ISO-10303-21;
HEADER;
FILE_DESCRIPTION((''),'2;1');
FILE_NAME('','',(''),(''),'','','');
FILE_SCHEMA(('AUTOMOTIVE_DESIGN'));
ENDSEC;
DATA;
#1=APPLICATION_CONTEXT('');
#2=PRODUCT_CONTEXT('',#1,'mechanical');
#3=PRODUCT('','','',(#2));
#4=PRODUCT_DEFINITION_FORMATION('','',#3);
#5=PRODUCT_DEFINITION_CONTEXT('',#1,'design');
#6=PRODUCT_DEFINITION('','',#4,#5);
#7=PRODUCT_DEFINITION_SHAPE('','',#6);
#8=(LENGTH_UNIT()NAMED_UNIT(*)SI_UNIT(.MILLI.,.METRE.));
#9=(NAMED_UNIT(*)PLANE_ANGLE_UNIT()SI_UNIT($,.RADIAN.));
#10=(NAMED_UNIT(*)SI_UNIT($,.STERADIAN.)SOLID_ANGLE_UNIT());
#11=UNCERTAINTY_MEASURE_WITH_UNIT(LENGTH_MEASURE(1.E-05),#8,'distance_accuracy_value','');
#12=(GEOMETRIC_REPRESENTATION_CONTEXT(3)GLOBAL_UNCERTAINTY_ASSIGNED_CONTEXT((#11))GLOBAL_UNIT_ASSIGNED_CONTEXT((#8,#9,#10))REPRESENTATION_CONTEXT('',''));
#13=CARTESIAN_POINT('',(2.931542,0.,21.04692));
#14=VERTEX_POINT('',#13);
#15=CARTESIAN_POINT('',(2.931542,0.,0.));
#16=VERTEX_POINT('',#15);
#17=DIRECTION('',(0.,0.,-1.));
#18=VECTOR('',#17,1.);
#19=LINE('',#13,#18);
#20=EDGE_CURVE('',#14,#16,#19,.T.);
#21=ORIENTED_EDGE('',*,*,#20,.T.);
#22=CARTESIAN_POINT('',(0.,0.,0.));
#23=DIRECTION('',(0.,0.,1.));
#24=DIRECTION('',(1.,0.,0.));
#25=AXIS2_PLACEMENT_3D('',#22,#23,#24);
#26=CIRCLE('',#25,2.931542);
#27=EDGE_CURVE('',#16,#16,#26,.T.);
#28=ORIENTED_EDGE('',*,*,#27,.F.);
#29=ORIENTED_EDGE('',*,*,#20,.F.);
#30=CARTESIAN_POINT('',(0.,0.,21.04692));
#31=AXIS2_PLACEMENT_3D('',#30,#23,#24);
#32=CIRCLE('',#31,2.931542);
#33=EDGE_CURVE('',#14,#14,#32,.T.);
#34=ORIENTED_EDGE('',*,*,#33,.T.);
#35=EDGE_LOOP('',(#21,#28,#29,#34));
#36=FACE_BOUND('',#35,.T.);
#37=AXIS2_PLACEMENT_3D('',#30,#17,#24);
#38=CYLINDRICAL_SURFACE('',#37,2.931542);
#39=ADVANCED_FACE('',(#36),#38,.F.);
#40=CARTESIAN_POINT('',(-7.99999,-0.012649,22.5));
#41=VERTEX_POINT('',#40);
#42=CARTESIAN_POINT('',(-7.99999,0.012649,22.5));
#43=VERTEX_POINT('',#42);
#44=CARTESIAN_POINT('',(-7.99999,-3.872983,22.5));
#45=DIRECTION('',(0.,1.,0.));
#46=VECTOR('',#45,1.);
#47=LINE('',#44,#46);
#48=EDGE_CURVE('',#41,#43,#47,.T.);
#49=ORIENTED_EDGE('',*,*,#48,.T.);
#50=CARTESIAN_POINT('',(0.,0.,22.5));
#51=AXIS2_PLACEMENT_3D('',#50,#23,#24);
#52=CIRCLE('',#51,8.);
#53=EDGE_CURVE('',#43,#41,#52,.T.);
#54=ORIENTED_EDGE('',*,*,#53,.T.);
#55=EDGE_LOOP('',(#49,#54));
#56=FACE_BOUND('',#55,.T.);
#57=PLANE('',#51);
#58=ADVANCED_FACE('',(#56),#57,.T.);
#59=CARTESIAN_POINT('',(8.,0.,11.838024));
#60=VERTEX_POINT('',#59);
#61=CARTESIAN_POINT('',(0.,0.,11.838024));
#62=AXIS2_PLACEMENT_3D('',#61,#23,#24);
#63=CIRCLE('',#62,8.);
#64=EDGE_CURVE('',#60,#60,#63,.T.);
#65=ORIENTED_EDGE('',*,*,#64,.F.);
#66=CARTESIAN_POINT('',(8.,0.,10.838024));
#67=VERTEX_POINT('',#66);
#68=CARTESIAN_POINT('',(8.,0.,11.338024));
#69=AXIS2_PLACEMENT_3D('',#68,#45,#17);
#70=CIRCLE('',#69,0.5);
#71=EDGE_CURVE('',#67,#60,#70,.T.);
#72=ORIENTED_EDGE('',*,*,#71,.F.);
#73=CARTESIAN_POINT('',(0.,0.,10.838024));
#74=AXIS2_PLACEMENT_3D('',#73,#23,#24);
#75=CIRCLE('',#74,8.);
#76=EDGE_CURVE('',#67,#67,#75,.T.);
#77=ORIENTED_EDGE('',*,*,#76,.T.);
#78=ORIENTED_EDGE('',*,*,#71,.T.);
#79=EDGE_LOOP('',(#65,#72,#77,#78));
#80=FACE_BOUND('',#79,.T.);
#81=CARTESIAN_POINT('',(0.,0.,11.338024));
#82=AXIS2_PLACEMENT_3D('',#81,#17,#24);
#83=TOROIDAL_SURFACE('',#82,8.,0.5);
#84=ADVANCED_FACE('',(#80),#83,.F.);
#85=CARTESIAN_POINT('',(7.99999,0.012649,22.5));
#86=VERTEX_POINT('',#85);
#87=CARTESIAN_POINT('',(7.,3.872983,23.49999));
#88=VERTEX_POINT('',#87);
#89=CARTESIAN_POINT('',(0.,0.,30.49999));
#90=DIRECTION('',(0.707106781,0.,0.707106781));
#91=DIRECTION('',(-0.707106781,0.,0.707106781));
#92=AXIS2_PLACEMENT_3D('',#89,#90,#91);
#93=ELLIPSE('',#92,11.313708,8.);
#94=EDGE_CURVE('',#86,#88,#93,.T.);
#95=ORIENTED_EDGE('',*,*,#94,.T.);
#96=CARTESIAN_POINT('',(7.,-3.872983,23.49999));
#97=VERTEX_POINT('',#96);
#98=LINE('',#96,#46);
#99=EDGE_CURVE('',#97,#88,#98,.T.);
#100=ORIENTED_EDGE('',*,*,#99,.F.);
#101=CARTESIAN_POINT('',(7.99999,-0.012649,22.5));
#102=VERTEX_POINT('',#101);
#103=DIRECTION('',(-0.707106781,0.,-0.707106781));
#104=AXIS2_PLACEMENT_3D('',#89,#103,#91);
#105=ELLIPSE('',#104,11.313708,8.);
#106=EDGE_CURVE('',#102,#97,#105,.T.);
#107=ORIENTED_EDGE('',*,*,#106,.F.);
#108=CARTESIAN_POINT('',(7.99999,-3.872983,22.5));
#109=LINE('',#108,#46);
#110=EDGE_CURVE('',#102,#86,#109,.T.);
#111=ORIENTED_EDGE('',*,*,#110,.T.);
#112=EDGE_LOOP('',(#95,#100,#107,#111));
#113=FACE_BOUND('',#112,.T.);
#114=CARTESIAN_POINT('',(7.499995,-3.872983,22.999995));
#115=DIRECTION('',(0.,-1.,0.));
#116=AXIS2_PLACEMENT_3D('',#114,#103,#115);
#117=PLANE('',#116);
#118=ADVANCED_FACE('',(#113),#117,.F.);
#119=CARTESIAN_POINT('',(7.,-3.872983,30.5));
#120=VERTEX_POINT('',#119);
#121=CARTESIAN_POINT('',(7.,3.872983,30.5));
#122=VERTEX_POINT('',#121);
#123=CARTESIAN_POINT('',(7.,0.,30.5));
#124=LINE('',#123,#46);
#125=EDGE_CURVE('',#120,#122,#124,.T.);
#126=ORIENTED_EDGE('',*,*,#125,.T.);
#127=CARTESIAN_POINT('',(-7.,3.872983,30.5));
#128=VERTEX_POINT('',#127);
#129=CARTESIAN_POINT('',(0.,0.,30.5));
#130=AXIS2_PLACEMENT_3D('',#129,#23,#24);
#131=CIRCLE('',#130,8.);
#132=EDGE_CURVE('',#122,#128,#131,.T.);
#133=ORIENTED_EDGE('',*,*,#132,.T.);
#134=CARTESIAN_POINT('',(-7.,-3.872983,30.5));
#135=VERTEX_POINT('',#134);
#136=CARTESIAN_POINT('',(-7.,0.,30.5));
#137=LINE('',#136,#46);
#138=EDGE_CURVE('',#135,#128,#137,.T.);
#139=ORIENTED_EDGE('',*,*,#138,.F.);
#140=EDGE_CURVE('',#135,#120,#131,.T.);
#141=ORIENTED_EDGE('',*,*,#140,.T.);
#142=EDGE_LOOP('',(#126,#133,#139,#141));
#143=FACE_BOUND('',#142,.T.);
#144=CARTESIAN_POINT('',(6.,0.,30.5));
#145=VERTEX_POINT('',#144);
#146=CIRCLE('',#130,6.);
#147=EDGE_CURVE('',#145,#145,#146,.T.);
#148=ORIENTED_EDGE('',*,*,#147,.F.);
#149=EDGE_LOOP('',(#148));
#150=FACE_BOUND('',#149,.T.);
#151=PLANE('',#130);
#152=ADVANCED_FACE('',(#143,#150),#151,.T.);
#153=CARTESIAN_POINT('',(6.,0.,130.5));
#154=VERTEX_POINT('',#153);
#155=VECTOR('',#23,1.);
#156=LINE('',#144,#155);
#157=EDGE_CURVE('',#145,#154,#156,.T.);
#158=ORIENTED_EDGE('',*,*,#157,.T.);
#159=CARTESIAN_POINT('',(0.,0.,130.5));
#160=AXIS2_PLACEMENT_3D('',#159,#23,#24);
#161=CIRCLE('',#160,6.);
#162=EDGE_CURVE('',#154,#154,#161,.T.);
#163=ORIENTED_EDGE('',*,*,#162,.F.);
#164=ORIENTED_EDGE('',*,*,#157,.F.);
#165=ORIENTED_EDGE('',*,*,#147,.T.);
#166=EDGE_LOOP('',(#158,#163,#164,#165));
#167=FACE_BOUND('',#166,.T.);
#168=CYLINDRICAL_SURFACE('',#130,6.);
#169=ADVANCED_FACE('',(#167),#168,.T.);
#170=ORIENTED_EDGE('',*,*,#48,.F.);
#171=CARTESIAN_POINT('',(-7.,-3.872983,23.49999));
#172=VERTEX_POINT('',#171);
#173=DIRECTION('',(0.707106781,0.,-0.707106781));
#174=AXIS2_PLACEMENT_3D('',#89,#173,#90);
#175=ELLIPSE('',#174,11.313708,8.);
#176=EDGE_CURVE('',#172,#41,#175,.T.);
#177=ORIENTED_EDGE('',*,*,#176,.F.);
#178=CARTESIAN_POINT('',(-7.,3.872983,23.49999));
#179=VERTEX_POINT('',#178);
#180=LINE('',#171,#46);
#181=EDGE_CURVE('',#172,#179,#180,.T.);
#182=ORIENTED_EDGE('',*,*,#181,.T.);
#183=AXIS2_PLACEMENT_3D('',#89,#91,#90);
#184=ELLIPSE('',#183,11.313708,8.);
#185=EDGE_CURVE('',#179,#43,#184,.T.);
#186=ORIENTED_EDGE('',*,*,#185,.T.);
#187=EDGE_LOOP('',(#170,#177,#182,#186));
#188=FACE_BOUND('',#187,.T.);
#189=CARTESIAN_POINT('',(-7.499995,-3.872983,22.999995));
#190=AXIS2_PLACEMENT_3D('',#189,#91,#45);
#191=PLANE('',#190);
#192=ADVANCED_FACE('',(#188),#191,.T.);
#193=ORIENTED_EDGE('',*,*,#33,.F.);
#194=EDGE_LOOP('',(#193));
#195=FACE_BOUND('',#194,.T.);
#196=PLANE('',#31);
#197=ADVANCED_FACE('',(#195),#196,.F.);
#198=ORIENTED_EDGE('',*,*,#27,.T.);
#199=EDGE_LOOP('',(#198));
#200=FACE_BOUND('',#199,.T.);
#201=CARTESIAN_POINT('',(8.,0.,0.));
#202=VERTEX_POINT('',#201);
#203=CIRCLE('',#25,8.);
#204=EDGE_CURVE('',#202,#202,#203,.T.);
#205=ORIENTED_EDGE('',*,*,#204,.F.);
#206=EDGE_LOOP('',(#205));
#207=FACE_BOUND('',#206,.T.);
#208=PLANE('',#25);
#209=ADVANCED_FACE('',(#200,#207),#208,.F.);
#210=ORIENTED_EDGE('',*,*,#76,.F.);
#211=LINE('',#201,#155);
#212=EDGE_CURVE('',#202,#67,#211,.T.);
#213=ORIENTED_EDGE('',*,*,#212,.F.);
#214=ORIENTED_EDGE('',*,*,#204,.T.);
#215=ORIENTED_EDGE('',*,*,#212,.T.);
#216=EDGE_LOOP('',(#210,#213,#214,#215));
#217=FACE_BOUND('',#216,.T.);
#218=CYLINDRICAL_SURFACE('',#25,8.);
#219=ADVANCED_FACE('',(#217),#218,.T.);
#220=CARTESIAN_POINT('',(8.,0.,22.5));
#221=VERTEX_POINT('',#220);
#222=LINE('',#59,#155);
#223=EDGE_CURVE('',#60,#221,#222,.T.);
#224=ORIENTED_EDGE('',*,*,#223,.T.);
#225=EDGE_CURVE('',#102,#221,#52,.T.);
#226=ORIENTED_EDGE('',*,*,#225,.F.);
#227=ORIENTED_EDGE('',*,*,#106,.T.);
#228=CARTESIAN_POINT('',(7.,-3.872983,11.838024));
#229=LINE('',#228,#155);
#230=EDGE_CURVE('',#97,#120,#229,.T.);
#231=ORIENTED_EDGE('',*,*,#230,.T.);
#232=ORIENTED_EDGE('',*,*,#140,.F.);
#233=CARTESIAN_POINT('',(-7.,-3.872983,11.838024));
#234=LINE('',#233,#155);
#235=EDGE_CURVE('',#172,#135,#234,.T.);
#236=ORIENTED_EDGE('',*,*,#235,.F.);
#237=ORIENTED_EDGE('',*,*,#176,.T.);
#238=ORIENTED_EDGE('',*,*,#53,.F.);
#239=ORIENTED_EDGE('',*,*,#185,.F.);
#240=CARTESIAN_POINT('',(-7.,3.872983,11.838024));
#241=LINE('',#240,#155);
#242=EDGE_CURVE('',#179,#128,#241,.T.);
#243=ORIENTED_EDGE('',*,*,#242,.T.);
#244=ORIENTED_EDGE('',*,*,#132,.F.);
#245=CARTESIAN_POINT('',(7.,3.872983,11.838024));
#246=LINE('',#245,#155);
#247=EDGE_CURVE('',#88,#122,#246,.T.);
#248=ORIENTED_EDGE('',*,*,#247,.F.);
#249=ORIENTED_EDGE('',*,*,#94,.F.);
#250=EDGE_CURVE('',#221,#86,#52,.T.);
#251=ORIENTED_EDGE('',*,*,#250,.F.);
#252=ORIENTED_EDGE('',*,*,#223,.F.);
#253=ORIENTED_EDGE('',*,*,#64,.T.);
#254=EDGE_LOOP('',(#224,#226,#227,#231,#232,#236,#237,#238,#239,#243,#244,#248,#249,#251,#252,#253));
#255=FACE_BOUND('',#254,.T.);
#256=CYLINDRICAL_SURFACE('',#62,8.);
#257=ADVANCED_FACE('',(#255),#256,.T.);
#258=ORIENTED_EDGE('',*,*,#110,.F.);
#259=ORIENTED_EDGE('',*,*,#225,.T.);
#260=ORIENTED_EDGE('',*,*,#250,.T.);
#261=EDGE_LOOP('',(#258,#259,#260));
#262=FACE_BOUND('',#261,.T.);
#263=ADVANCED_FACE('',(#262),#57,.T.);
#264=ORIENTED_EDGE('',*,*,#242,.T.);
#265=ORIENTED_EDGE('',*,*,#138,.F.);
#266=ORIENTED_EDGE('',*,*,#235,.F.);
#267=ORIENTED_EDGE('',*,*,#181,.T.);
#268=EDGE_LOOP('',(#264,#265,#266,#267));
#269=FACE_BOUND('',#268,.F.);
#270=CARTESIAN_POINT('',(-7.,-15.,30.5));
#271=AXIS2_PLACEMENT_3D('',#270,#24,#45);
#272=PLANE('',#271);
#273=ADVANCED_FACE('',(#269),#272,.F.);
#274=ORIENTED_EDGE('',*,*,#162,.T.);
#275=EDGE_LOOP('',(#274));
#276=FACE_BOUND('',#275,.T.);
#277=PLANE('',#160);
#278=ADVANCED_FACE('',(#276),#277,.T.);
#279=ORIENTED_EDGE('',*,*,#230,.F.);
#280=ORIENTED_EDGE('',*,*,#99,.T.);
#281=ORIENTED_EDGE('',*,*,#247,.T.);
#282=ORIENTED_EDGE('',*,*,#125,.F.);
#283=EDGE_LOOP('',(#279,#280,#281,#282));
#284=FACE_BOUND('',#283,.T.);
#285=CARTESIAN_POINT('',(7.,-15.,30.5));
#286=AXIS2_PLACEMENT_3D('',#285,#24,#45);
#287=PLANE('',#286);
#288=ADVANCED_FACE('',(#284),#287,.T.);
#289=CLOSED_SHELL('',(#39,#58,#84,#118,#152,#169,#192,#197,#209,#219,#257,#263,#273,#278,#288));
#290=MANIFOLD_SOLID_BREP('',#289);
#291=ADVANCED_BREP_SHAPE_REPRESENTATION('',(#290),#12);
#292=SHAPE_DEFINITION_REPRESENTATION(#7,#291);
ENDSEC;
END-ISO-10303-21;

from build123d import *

# Parameters (mm, degrees)
F2_W     = 19.6017324924
F2_H     = 37.1457748115
F2_W_2   = 14
F2_H_2   = 30
F3_DEPTH = 8
F4_SIZE  = 0.99999


# Not quite as in the source:
# - a fillet or chamfer is up to 0.001 mm smaller than in the source, because OpenCascade refuses the exact size


with BuildPart() as f1:
    # F0 (on Front) → F1 (revolve)
    with BuildSketch(Plane.XZ):
        with BuildLine():
            Line((2.9315422289, 21.0469197482), (2.9315422289, 0))
            Line((2.9315422289, 0), (8, 0))
            Line((8, 0), (8, 10.8380244002))
            ThreePointArc((8, 10.8380244002), (7.5, 11.3380244002), (8, 11.8380244002))
            Line((8, 11.8380244002), (8, 30.5))
            Line((8, 30.5), (6, 30.5))
            Line((6, 30.5), (6, 130.5))
            Line((6, 130.5), (0, 130.5))
            Line((0, 130.5), (0, 30.5))
            Line((0, 30.5), (0, 21.0469197482))
            Line((0, 21.0469197482), (2.9315422289, 21.0469197482))
        make_face()
    revolve(axis=Axis((0, 0, 80.5), (0, 0, 1)))

    # F2 (on face) → F3 (cut)
    with BuildSketch(Plane.XY.offset(30.5)):
        Rectangle(F2_W, F2_H)
        Rectangle(F2_W_2, F2_H_2, mode=Mode.SUBTRACT)
    extrude(amount=-F3_DEPTH, mode=Mode.SUBTRACT)

    # F4 (size 1 in the source; OpenCascade refuses exactly that, so slightly less here)
    f4_edges = [f1.edges().sort_by_distance(p)[0] for p in [
        (-7, 0, 22.5),
        (7, 0, 22.5),
    ]]
    chamfer(f4_edges, length=F4_SIZE)


solid = f1.part
